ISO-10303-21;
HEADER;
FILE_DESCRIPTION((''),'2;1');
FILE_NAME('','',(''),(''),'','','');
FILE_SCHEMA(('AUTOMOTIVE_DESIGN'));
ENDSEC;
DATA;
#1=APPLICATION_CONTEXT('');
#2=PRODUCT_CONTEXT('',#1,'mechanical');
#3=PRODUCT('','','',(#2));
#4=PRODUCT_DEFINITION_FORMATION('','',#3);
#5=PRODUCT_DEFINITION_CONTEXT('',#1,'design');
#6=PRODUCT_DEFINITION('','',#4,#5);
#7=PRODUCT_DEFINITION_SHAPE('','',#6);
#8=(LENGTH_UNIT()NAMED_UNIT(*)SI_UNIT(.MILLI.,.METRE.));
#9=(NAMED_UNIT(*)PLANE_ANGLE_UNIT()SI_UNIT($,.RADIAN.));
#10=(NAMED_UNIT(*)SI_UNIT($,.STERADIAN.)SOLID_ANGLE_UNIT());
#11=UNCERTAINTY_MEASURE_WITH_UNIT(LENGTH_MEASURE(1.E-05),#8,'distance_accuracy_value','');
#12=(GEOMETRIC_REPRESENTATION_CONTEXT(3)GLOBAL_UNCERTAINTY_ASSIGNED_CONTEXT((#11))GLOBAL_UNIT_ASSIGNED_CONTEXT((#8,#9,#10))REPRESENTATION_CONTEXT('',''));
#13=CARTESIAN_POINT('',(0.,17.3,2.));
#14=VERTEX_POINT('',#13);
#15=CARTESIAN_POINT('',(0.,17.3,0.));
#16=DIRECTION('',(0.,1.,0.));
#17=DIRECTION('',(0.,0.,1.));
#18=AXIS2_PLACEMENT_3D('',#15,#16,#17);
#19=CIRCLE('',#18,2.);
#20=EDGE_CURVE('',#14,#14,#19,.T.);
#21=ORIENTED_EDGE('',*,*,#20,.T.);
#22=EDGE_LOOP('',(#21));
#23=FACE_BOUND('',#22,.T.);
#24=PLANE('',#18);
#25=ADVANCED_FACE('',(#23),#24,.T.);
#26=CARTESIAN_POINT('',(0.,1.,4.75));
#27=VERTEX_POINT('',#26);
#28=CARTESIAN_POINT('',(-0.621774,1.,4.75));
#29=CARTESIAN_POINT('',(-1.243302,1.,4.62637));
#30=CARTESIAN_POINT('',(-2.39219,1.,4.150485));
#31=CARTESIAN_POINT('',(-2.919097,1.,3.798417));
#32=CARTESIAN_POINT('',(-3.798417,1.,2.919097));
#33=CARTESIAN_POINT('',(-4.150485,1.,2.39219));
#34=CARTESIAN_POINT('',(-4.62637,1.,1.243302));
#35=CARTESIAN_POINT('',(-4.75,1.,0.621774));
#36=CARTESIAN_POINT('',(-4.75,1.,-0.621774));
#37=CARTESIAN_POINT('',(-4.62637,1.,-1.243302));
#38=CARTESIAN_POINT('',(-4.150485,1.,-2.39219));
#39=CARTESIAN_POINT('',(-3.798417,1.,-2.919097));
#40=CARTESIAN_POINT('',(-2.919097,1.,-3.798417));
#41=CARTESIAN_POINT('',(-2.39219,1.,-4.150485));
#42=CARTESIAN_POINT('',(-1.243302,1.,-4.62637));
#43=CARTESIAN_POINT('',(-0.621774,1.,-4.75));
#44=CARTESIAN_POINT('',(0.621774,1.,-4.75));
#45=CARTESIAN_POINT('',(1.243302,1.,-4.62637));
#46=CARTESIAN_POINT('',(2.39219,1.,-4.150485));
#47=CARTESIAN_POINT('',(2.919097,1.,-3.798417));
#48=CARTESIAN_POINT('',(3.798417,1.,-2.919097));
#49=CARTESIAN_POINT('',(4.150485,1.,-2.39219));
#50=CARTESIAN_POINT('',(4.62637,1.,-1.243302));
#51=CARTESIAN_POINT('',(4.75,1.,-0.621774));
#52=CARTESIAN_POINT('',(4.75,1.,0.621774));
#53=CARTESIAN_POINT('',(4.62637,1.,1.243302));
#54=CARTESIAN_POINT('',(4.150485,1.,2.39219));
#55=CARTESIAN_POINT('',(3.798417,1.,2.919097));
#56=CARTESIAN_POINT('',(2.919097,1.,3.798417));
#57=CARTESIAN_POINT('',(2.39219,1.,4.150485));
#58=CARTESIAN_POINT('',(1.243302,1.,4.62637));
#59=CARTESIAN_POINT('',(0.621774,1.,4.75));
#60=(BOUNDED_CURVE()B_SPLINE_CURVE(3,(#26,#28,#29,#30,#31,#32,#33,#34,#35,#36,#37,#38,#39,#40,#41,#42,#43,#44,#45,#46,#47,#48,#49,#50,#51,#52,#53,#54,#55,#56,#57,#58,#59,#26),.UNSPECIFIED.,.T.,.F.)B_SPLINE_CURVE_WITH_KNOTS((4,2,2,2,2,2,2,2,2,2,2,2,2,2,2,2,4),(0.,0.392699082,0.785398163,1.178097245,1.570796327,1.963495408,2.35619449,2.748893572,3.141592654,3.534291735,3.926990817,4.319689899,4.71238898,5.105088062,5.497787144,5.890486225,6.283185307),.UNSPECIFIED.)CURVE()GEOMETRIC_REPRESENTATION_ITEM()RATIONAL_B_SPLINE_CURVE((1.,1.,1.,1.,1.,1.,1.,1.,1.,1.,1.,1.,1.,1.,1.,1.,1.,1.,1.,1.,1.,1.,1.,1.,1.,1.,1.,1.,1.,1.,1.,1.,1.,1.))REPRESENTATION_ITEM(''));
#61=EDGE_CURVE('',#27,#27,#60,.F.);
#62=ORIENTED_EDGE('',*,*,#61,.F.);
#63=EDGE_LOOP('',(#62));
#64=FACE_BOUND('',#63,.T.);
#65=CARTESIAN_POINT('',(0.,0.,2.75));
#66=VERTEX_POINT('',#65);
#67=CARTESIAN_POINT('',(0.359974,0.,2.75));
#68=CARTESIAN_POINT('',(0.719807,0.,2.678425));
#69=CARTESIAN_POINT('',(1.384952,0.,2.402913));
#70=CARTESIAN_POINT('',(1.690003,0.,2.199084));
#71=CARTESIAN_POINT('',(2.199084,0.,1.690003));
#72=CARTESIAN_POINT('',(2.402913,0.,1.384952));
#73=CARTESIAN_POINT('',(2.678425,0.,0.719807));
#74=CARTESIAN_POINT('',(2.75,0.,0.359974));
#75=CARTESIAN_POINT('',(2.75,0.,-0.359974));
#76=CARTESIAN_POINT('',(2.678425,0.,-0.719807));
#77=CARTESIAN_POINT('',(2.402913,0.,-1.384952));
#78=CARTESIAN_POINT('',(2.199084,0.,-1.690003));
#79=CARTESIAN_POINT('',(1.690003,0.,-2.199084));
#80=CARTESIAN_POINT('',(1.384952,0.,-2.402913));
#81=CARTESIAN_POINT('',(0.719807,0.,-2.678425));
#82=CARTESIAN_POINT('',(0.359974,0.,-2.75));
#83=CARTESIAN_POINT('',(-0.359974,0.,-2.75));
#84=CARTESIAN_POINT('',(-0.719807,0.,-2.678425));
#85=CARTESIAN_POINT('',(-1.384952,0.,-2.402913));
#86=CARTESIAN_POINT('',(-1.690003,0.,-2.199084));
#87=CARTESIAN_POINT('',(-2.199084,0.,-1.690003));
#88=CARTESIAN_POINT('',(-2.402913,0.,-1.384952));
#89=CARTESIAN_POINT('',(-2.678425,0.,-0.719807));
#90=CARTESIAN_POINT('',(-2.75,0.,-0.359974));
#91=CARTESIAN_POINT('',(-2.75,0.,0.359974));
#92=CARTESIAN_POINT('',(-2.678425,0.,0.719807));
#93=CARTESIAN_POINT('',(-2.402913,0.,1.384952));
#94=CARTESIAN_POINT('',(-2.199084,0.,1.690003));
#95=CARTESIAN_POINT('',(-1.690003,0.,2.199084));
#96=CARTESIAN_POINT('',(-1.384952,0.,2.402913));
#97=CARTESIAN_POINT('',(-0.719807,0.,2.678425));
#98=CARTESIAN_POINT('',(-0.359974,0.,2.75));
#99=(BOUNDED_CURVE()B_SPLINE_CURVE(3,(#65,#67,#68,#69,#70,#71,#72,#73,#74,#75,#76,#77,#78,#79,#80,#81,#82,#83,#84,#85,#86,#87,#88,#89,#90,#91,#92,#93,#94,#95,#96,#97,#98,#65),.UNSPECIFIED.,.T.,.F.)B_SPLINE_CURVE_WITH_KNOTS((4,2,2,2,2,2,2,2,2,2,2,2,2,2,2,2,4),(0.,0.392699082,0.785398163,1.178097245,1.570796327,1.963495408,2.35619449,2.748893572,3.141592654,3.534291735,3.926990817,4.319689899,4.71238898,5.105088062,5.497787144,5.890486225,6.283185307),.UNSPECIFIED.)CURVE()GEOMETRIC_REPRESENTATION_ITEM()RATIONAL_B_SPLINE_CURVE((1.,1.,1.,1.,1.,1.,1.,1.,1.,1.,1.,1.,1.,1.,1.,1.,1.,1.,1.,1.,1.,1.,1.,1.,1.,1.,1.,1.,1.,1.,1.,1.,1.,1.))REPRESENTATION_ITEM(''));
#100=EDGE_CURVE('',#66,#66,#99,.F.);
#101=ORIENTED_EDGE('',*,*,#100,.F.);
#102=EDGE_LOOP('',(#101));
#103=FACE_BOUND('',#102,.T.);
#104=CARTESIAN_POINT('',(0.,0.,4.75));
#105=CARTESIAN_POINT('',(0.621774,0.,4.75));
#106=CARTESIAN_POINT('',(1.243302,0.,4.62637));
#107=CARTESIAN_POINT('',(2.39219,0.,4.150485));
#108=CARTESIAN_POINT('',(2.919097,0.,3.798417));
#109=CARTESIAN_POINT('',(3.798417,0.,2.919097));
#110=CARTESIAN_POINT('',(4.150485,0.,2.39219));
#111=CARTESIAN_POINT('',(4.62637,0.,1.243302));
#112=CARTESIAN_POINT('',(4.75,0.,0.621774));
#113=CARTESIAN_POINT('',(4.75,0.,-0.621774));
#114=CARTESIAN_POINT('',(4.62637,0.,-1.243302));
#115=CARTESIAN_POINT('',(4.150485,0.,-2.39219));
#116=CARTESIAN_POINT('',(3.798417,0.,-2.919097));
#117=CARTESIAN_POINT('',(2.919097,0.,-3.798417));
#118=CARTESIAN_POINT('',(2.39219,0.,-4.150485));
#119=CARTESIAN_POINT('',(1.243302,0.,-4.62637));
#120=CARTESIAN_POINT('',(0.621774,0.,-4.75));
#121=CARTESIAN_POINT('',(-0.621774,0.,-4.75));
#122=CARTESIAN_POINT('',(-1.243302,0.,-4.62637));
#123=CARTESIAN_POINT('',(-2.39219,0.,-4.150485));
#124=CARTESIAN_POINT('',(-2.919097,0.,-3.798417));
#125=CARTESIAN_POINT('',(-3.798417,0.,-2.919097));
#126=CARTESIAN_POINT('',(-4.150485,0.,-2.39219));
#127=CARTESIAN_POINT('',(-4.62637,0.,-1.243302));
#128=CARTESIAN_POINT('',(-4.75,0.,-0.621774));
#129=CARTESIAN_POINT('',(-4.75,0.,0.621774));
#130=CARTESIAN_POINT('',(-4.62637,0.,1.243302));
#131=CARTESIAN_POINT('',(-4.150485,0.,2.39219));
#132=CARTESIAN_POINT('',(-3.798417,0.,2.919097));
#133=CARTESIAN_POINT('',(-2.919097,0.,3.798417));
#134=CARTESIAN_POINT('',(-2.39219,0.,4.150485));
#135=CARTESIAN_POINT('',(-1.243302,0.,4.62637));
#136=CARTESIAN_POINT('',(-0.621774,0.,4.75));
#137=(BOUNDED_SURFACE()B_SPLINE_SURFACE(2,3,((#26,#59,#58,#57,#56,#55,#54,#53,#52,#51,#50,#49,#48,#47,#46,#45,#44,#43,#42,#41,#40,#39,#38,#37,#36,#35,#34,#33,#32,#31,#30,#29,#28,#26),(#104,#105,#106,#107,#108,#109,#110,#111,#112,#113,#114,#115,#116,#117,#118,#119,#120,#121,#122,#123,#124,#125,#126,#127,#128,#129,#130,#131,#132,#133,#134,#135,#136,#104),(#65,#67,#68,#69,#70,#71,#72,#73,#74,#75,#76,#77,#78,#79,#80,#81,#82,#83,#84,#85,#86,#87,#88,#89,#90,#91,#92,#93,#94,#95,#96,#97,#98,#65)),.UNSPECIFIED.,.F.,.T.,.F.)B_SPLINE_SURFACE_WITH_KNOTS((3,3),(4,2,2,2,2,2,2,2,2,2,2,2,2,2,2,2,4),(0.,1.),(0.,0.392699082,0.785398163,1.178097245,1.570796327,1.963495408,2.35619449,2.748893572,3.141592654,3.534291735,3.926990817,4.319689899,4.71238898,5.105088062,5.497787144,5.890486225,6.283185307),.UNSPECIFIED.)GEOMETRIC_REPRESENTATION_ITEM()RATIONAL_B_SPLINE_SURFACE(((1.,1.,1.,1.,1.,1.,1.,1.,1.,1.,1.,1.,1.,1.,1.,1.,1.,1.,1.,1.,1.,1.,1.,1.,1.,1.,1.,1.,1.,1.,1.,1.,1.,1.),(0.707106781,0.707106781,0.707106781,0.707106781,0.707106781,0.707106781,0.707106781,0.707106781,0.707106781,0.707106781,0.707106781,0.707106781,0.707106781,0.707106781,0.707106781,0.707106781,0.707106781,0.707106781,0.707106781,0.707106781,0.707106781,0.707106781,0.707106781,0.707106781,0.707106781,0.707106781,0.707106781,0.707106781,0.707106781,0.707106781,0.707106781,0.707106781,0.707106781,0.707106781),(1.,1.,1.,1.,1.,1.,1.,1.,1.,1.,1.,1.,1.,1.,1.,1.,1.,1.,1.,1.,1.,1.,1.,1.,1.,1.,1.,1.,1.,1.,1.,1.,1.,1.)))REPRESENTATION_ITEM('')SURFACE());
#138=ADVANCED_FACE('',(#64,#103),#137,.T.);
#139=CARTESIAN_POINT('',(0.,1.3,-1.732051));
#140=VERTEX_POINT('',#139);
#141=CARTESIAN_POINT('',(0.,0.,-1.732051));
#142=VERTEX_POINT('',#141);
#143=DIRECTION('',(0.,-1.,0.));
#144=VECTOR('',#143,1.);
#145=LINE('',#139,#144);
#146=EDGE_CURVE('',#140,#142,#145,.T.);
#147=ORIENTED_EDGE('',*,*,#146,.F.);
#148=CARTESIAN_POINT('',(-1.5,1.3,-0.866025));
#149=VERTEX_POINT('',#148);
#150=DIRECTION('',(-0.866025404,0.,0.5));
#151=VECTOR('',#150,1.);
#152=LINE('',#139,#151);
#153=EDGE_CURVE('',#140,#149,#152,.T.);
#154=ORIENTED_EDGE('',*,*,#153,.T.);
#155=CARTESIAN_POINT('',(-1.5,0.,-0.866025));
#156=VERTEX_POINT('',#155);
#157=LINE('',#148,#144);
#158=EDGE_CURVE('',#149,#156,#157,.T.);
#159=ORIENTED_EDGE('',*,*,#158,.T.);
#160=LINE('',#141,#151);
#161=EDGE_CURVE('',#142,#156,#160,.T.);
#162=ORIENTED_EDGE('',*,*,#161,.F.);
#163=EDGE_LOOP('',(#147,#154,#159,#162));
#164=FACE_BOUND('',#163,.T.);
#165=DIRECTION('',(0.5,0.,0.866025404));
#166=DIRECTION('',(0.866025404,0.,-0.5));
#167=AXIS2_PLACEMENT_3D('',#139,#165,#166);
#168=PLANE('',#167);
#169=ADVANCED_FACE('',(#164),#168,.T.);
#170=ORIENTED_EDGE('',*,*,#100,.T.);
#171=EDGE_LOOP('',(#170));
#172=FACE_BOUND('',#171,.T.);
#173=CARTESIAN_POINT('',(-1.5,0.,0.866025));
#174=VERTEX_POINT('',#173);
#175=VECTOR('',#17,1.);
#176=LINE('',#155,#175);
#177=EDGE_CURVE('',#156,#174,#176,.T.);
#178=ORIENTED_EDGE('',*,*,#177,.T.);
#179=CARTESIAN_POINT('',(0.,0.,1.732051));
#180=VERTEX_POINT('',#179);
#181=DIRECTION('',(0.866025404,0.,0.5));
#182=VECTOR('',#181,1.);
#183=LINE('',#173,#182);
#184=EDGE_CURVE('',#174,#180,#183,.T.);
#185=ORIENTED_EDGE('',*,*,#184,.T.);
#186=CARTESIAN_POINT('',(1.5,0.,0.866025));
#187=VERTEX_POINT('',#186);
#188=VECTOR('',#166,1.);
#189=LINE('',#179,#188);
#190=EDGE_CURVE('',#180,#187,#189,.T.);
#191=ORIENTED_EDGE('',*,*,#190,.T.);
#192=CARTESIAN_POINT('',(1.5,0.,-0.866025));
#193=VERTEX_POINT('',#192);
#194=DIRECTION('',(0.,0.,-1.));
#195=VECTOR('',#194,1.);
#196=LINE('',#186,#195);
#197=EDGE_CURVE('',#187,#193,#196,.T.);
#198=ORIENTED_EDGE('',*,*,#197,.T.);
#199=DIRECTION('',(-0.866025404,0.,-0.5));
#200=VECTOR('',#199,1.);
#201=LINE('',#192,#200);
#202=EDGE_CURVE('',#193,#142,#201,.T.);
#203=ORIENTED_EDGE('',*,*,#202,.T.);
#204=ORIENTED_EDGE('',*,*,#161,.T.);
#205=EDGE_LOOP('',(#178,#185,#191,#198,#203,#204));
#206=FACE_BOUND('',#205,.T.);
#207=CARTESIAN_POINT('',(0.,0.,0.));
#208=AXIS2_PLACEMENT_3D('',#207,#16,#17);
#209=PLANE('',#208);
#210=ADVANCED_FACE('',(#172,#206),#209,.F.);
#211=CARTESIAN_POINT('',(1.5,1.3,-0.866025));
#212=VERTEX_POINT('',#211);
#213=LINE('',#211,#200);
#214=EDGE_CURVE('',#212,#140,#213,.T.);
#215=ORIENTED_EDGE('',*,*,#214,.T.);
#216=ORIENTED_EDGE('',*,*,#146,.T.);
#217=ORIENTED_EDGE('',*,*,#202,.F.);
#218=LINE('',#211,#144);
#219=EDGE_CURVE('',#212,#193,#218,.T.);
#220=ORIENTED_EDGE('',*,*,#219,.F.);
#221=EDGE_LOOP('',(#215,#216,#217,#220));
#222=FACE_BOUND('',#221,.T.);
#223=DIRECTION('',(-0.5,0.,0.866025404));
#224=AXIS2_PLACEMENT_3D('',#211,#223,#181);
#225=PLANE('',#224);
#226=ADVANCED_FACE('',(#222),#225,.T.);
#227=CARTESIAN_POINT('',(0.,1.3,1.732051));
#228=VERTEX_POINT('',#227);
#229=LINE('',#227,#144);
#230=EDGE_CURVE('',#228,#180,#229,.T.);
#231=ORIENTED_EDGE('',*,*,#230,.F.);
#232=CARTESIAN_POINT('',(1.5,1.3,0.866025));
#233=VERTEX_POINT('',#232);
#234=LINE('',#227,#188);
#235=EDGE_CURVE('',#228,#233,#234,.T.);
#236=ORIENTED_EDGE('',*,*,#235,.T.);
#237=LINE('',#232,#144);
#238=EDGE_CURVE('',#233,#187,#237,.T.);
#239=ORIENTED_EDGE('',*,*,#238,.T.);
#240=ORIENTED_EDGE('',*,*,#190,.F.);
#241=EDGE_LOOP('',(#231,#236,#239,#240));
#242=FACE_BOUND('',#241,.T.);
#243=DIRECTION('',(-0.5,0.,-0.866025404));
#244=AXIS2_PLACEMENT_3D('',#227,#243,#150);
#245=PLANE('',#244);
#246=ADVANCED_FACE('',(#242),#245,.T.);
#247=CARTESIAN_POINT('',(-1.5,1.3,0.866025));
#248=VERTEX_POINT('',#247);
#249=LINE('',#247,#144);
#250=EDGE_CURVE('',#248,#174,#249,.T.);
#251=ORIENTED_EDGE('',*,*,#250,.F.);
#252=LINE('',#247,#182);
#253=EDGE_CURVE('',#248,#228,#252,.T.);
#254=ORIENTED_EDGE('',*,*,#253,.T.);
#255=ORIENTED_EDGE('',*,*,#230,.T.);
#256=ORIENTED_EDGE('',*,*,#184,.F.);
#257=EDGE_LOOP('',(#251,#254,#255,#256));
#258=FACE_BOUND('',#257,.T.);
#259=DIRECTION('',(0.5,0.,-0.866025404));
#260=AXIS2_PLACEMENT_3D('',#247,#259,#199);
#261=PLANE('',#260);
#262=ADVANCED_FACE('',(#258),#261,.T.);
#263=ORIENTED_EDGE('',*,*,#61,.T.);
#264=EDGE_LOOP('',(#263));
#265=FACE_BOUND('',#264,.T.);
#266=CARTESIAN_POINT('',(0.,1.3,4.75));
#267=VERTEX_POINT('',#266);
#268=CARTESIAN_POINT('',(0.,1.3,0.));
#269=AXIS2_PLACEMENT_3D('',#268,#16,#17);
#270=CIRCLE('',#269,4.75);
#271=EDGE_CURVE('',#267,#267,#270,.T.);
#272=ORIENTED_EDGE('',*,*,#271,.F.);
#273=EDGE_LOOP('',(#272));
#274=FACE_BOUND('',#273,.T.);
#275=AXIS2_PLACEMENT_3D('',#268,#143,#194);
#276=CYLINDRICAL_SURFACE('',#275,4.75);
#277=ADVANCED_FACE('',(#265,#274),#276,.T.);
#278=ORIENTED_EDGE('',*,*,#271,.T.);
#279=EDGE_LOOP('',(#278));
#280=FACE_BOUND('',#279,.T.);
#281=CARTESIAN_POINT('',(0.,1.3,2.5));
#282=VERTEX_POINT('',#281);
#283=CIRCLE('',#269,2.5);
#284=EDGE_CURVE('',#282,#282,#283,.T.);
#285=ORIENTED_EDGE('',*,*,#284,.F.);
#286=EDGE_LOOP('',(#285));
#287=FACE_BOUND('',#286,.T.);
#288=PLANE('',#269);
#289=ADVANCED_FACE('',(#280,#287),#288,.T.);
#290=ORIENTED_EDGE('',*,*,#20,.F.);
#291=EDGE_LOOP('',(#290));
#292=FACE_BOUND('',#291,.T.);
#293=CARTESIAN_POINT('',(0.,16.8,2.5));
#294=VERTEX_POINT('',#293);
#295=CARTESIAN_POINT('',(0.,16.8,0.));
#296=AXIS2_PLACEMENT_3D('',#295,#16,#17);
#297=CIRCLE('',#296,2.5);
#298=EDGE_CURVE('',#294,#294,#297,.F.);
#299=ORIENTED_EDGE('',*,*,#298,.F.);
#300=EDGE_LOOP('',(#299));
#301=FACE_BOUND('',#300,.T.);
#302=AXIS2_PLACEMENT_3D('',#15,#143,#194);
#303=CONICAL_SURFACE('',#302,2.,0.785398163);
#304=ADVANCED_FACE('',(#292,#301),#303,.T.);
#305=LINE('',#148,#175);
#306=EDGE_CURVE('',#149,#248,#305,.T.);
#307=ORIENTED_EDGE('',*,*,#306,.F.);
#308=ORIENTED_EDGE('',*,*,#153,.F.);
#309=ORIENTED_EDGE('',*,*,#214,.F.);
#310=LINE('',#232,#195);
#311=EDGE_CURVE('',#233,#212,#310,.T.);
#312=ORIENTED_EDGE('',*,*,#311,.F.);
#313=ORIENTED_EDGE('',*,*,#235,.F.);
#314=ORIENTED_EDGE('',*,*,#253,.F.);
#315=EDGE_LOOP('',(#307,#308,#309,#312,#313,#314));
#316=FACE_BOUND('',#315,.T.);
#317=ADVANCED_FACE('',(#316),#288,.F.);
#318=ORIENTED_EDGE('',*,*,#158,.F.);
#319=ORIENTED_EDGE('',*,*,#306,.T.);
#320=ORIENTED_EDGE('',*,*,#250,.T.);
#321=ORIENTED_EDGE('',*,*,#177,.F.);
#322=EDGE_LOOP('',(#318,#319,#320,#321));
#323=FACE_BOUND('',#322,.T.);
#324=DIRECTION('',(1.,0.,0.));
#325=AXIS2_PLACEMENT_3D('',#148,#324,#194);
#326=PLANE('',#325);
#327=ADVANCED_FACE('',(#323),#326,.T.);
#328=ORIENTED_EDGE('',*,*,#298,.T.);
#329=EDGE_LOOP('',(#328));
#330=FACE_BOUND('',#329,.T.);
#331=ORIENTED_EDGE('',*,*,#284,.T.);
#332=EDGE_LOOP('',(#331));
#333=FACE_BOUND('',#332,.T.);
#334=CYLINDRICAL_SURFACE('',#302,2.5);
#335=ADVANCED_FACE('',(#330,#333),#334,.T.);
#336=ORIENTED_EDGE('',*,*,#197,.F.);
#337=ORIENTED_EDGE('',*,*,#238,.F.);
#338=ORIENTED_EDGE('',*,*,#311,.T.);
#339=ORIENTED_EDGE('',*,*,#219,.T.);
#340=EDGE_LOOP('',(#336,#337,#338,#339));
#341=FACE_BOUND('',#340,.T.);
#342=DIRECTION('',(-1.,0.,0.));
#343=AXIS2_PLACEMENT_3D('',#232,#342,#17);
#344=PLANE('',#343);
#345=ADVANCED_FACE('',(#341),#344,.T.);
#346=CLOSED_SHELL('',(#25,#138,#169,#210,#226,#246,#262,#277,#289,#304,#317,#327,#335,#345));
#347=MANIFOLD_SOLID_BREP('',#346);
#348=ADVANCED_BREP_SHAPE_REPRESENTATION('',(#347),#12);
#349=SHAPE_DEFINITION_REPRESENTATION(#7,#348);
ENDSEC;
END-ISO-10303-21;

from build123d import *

# Parameters (mm, degrees)
SKETCH_1_R      = 4.75
EXTRUDE_1_DEPTH = 1.3
SKETCH_2_R      = 2.5
EXTRUDE_2_DEPTH = 16
CHAMFER_1_SIZE  = 0.5
FILLET_1_SIZE   = 1
FILLET_1_SIZE_2 = 2


with BuildPart() as part:
    # 草图1 → 凸台-拉伸1 (new body)
    with BuildSketch(Plane(origin=(0, 0, 0), x_dir=(1, 0, 0), z_dir=(0, 1, 0))):
        with Locations(Location((0, 0, 0), (0, 0, 270))):
            Circle(SKETCH_1_R)
        Polygon((0, -1.732050808), (1.5, -0.866025404), (1.5, 0.866025404), (0, 1.732050808), (-1.5, 0.866025404), (-1.5, -0.866025404), align=None, mode=Mode.SUBTRACT)
    extrude(amount=EXTRUDE_1_DEPTH)

    # 草图2 → 凸台-拉伸2 (add)
    with BuildSketch(Plane(origin=(0, 1.3, 0), x_dir=(1, 0, 0), z_dir=(0, 1, 0))):
        with Locations(Location((0, 0, 0), (0, 0, 270))):
            Circle(SKETCH_2_R)
    extrude(amount=EXTRUDE_2_DEPTH)

    # 倒角1
    chamfer_1_edges = [part.edges().sort_by_distance(p)[0] for p in [
        (0, 17.3, -2.5),
    ]]
    chamfer(chamfer_1_edges, length=CHAMFER_1_SIZE)

    # 圆角1
    # an asymmetric fillet: 2, 1 mm, written as the material it takes off along each edge
    with BuildSketch(Plane(origin=(0, 0, 0), x_dir=(0, 0, 1), z_dir=(-1, 0, 0))) as fillet_1_piece_1:
        with BuildLine():
            Bezier((4.75, FILLET_1_SIZE), (4.75, 0), (4.75 - FILLET_1_SIZE_2, 0), weights=[1, 0.707106781, 1])
            Line((4.75 - FILLET_1_SIZE_2, 0), (4.75, 0))
            Line((4.75, 0), (4.75, FILLET_1_SIZE))
        make_face()
    revolve(axis=Axis((0, 0, 0), (0, 1, 0)), mode=Mode.SUBTRACT)


solid = part.part
